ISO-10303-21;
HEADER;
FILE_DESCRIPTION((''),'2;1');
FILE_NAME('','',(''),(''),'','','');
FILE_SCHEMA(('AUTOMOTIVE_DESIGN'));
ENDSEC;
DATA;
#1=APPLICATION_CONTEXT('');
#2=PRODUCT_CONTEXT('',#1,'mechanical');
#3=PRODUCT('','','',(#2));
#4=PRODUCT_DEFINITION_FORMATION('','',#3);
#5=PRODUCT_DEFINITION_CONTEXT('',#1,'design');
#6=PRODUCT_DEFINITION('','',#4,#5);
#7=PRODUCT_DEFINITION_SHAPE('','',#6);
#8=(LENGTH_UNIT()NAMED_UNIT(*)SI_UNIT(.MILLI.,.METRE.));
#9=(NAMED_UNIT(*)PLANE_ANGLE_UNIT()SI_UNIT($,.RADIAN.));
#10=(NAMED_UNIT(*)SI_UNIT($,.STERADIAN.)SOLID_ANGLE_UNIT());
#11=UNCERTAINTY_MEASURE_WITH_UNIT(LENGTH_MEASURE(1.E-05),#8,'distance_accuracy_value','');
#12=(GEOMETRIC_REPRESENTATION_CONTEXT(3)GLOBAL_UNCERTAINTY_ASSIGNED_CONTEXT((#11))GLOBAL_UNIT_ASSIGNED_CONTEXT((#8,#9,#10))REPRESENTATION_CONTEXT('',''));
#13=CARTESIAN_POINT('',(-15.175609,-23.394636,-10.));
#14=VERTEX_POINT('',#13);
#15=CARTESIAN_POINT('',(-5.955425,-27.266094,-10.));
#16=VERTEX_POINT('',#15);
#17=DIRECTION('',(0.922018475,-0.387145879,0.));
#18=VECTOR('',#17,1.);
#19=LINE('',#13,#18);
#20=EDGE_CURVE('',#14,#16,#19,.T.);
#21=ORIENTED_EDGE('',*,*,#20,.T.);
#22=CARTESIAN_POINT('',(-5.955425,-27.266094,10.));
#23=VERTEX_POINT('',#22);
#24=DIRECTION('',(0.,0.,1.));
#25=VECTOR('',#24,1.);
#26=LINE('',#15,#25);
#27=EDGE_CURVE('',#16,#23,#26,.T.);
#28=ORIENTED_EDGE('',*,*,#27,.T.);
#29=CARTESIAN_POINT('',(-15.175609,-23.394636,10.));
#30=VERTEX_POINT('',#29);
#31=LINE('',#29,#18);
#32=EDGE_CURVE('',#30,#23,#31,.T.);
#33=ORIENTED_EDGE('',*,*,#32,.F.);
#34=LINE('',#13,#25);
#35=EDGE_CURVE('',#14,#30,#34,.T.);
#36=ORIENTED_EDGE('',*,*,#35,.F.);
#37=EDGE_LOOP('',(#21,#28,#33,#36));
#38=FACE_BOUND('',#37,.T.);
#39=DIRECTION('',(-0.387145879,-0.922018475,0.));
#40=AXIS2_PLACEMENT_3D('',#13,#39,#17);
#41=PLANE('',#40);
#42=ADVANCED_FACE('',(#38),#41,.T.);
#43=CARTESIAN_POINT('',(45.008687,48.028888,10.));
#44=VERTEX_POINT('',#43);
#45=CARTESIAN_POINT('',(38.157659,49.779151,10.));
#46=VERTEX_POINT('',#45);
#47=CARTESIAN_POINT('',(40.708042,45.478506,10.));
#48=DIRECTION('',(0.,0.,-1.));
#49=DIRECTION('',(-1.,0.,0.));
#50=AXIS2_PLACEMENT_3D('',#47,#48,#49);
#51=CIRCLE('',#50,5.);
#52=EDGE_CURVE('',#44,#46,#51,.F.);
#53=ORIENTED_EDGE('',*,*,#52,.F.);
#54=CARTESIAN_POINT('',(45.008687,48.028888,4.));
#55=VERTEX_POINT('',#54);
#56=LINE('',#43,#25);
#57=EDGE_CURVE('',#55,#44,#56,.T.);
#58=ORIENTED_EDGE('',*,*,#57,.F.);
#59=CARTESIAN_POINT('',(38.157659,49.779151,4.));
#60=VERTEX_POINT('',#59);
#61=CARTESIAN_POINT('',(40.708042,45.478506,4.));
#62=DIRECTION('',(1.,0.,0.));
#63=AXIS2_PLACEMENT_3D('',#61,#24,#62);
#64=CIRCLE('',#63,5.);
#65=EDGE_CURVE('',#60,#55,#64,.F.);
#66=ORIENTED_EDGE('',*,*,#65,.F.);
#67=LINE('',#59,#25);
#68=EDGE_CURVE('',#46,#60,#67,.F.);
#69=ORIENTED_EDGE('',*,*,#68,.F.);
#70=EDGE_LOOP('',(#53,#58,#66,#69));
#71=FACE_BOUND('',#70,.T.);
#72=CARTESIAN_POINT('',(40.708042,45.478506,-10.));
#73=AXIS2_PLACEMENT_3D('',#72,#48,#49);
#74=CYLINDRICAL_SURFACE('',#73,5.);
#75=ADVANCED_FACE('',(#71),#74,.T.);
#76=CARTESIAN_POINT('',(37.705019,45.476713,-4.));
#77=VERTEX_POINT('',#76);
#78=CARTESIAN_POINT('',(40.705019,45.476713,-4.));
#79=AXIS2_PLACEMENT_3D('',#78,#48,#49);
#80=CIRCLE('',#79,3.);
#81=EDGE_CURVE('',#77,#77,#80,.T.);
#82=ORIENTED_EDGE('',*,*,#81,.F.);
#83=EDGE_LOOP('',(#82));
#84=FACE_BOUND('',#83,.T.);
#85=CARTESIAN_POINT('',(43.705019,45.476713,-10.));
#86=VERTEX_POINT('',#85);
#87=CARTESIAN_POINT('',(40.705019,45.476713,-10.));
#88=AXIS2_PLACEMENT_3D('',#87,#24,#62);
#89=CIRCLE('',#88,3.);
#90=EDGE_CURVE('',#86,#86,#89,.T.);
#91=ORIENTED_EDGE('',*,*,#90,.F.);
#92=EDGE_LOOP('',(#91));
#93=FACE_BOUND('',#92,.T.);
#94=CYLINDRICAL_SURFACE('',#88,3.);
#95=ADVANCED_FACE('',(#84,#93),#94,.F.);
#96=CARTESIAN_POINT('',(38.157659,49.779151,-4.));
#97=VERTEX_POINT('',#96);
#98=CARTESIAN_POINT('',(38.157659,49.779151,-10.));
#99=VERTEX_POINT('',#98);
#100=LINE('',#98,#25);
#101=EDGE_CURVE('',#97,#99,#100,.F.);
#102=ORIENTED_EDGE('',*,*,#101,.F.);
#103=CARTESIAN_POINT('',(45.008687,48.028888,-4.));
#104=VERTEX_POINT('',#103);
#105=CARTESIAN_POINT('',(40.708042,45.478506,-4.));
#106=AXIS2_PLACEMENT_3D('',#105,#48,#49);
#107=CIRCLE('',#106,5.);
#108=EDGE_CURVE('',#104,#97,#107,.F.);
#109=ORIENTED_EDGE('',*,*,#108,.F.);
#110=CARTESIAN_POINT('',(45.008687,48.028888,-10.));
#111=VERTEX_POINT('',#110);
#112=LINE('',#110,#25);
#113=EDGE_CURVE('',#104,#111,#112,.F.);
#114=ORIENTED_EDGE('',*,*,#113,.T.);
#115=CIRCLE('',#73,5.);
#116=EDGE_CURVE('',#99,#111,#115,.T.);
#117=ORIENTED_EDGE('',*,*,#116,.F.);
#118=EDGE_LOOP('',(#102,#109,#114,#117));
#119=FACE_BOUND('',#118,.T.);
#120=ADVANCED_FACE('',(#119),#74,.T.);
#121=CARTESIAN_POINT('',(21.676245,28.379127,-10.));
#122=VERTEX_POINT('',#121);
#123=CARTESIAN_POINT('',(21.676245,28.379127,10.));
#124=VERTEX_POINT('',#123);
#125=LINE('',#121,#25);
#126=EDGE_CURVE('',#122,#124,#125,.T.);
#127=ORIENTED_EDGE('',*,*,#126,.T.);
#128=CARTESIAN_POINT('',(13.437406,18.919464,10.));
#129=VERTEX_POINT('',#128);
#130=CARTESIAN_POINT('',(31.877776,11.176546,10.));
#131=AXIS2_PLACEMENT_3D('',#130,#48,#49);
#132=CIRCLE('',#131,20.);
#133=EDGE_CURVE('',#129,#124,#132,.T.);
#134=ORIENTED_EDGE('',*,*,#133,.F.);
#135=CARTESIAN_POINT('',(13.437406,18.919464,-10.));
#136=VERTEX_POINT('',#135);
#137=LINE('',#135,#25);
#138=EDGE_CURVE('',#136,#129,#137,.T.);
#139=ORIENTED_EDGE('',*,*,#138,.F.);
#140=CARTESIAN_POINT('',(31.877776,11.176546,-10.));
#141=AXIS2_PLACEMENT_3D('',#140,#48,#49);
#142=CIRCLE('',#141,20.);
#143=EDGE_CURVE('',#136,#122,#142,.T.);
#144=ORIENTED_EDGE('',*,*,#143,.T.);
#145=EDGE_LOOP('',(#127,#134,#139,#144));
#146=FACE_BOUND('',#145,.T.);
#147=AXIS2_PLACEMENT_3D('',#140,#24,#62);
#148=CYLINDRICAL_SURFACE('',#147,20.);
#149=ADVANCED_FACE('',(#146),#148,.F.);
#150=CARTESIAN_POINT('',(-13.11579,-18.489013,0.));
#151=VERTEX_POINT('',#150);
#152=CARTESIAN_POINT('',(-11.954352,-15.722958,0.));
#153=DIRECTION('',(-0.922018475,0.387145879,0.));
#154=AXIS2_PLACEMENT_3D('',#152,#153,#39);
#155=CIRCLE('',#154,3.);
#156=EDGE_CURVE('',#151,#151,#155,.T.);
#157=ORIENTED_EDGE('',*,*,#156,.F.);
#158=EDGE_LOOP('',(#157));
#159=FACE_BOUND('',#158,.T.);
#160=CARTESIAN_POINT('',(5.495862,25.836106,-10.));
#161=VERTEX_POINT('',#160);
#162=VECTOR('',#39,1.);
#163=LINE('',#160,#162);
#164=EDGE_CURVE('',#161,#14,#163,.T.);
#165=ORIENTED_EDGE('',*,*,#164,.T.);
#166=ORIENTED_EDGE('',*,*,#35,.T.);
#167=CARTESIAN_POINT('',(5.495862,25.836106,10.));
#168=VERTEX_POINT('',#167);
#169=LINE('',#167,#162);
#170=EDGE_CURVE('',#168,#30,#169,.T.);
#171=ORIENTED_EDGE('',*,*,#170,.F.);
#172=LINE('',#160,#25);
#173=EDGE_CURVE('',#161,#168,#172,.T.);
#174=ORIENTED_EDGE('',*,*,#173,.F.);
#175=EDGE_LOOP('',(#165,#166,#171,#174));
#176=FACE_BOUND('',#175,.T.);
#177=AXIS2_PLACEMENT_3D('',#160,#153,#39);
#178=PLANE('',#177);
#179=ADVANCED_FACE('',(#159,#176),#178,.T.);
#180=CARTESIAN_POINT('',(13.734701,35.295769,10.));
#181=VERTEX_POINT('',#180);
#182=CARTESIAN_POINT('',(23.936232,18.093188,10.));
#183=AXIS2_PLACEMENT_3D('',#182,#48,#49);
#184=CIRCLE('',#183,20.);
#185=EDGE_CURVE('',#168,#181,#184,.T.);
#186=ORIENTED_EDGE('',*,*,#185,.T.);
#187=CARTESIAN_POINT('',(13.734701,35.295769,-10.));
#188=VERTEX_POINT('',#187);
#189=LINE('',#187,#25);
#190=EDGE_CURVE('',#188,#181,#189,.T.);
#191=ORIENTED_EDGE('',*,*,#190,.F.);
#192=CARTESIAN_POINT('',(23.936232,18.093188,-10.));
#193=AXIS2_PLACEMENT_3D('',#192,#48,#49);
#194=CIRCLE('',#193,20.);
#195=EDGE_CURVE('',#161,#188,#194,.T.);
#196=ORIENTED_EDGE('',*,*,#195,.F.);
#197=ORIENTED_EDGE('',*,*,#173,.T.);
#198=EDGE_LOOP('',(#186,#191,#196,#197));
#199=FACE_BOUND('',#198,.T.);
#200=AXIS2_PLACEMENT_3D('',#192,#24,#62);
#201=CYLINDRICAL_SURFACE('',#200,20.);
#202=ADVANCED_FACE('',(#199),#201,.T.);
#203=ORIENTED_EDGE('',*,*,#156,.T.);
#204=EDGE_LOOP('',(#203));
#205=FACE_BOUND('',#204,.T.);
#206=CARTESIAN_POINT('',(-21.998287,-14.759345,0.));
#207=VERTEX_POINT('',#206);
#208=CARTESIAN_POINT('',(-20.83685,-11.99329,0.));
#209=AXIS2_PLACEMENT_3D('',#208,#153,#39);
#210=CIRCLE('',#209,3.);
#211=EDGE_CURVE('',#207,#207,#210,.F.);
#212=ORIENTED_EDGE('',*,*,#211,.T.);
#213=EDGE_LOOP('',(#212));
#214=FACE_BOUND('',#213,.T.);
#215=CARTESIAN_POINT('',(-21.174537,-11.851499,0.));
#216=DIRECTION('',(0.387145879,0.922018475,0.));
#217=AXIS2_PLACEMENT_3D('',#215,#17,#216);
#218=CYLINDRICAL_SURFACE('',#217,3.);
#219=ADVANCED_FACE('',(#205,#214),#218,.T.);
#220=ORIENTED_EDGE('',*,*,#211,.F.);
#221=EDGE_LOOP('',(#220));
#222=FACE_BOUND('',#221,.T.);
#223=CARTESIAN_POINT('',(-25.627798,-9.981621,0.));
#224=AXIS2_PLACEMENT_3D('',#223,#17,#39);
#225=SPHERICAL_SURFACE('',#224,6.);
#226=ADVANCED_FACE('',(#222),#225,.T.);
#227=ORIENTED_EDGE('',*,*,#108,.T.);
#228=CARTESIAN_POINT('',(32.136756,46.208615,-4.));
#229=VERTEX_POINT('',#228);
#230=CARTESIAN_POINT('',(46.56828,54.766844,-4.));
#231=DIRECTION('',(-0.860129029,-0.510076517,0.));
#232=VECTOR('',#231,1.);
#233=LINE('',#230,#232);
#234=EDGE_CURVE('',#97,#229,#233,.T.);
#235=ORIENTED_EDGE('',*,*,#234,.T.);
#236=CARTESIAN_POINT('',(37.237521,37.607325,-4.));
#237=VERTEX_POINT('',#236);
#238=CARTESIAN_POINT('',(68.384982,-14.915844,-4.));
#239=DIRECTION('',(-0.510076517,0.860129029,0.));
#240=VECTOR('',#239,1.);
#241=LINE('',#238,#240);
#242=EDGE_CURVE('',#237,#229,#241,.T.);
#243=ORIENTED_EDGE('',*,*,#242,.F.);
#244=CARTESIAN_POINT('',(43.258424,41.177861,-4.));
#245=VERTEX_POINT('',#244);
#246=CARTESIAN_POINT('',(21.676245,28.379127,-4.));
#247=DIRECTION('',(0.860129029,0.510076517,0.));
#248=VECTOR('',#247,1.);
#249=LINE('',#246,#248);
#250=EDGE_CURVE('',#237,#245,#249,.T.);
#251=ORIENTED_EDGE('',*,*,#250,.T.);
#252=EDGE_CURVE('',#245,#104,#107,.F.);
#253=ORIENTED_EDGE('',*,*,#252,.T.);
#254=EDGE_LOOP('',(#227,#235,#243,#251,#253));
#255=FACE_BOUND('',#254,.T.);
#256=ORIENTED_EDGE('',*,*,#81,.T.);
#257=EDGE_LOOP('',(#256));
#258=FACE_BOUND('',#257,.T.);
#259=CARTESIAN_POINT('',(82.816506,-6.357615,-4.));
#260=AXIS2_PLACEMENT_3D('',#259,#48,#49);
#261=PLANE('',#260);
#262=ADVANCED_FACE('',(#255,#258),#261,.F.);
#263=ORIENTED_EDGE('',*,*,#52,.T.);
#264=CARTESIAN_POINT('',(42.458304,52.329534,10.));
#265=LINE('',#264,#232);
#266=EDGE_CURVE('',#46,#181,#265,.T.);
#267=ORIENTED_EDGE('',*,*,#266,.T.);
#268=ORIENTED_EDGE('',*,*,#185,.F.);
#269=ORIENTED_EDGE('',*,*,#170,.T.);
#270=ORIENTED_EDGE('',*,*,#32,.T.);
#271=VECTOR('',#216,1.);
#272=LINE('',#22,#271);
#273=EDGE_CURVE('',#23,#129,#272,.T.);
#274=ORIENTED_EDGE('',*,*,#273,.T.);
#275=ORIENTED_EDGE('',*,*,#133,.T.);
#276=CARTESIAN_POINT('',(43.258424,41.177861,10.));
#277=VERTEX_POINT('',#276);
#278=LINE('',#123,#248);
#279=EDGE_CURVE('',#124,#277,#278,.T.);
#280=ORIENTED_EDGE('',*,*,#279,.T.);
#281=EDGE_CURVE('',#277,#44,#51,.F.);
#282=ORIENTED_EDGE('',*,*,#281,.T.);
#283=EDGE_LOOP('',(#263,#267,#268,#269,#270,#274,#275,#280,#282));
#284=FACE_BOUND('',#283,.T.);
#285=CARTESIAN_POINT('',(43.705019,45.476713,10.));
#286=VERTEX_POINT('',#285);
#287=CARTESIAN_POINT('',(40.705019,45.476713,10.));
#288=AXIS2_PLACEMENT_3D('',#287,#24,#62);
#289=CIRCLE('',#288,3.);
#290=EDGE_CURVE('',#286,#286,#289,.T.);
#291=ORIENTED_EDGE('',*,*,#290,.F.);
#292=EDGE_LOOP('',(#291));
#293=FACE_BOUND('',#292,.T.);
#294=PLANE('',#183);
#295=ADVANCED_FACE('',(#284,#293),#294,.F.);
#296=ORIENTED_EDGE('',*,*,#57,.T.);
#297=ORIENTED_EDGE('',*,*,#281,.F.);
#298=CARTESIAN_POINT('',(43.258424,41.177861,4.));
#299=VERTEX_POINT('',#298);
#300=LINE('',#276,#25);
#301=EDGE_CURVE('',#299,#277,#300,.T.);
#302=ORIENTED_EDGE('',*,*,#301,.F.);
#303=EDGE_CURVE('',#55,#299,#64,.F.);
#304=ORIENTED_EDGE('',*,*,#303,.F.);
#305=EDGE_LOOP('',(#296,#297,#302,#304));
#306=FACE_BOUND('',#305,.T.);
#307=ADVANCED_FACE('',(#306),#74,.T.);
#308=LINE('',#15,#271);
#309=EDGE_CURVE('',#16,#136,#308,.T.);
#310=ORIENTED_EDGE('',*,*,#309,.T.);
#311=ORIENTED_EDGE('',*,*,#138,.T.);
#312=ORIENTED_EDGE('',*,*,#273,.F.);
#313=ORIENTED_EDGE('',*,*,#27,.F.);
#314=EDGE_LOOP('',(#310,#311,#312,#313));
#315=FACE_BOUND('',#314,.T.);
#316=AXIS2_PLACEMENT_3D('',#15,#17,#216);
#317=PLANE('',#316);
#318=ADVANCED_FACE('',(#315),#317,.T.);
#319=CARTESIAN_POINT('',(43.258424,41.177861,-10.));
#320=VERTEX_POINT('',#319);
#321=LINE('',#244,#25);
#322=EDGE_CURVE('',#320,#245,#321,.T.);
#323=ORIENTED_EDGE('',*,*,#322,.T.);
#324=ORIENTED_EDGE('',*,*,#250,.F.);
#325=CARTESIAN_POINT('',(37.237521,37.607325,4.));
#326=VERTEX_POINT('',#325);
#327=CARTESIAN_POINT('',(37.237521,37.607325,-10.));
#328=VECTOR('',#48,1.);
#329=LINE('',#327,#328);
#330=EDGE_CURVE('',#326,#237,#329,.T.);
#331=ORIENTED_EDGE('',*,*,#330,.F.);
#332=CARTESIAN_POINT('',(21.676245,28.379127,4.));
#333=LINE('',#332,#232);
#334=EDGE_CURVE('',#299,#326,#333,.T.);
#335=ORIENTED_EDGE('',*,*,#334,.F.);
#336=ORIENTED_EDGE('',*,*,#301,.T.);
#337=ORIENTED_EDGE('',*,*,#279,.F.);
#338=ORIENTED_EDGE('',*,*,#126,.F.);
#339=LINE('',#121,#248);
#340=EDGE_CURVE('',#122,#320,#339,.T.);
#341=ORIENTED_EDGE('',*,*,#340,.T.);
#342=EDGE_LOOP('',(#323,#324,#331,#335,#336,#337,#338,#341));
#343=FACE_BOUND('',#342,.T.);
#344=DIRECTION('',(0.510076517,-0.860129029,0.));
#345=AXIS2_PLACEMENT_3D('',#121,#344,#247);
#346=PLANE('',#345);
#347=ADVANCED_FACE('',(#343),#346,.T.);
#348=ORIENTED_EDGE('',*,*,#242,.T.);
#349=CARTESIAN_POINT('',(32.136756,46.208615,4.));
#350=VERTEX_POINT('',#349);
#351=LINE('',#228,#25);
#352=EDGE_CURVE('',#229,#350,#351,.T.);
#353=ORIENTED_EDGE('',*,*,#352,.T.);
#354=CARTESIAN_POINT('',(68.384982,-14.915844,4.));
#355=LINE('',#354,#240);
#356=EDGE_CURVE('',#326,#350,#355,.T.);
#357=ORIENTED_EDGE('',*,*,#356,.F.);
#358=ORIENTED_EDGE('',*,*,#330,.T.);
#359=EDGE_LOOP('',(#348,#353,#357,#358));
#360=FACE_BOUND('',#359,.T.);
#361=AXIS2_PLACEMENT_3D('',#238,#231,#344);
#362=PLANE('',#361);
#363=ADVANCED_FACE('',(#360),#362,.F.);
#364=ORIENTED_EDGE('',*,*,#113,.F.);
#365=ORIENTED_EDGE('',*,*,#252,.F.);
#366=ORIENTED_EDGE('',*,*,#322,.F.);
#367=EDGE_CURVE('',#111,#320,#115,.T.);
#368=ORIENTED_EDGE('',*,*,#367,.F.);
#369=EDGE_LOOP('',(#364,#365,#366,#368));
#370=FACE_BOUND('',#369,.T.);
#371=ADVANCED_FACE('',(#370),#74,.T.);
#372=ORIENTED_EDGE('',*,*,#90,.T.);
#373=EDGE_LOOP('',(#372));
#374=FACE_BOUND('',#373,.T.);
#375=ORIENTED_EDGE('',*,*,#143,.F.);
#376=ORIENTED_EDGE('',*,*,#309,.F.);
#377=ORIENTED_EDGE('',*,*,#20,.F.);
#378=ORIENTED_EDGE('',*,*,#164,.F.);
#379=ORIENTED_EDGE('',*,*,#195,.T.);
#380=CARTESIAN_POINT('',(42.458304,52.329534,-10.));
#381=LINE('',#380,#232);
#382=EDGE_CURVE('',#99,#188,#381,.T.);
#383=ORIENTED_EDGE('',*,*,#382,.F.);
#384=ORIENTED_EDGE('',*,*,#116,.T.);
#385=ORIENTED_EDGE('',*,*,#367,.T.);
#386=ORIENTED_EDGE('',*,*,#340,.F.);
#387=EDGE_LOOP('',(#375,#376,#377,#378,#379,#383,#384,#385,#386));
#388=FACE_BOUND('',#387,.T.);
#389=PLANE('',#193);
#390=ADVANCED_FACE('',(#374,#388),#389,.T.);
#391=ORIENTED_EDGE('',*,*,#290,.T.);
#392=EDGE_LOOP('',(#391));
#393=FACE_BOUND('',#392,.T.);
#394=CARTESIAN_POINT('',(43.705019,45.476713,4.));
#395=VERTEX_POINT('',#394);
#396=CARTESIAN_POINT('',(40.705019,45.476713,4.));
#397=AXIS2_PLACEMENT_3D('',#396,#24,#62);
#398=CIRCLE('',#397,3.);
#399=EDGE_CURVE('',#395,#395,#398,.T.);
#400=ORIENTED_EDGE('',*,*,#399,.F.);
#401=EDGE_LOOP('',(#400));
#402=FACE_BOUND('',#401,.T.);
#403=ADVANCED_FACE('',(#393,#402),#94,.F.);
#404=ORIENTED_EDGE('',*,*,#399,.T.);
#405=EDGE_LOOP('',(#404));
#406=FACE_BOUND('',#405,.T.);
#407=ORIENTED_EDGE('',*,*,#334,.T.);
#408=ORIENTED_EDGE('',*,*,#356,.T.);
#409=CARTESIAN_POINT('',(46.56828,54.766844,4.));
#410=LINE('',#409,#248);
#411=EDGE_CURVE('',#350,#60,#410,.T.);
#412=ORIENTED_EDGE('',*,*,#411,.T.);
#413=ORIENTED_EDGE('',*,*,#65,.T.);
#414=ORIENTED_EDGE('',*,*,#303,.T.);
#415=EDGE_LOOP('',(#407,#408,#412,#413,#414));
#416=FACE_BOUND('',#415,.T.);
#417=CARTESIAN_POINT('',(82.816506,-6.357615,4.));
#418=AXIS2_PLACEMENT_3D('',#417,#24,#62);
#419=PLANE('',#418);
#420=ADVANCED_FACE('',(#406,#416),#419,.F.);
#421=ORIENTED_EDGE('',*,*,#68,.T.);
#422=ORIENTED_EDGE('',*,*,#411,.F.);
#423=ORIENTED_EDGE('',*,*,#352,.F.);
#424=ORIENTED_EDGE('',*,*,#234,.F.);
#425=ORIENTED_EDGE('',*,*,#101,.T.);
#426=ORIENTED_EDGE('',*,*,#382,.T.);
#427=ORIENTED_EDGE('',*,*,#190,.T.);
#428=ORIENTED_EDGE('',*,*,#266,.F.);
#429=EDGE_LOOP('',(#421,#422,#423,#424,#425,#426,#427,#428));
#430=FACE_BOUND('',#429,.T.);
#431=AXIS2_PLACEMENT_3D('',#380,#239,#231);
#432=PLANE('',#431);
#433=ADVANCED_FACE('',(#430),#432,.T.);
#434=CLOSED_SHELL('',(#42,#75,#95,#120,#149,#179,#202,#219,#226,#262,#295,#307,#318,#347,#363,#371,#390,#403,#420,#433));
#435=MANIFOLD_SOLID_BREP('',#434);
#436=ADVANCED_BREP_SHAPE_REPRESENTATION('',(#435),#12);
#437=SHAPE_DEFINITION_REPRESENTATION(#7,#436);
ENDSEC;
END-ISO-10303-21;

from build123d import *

# Parameters (mm, degrees)
BOSS_EXTRU_1_DEPTH      = 10
BOSS_EXTRU_1_DEPTH_BACK = 10
ESQUISSE2_W             = 16.778324123
ESQUISSE2_H             = 8
ENL_V_MAT_EXTRU_2_DEPTH = 77.675205123
ESQUISSE3_R             = 3
ENL_V_MAT_EXTRU_3_DEPTH = 74.486360502
ESQUISSE4_R             = 3
BOSS_EXTRU_2_DEPTH      = 10
CONG_2_R                = 5


with BuildPart() as part:
    # Esquisse1 → Boss.-Extru.1 (new, two sides: drawn at the far end of the back side and taken through both)
    with BuildSketch(Plane.XY.offset(-BOSS_EXTRU_1_DEPTH_BACK)):
        with BuildLine():
            Line((42.458304448, 52.329533504), (13.73470128, 35.295768835))
            ThreePointArc((13.73470128, 35.295768835), (8.854424282, 31.228601734), (5.495862123, 25.836105835))
            Line((5.495862123, 25.836105835), (-15.175609455, -23.394635688))
            Line((-15.175609455, -23.394635688), (-5.955424705, -27.266094479))
            Line((-5.955424705, -27.266094479), (13.437406292, 18.919463554))
            ThreePointArc((13.437406292, 18.919463554), (16.795968451, 24.311959453), (21.676245449, 28.379126554))
            Line((21.676245449, 28.379126554), (47.55906962, 43.728243213))
            Line((47.55906962, 43.728243213), (42.458304448, 52.329533504))
        make_face()
    extrude(amount=BOSS_EXTRU_1_DEPTH + BOSS_EXTRU_1_DEPTH_BACK)

    # Esquisse2 → Enlèv. mat.-Extru.2 (cut, through all)
    with BuildSketch(Plane(origin=(-11.911901978, 20.08673667, 0), x_dir=(0.8601290290322577, 0.5100765172168049, 0), z_dir=(-0.5100765172168049, 0.8601290290322577, 0))):
        with Locations((59.600848438, 0)):
            Rectangle(ESQUISSE2_W, ESQUISSE2_H)
    extrude(amount=-ENL_V_MAT_EXTRU_2_DEPTH, mode=Mode.SUBTRACT)

    # Esquisse3 → Enlèv. mat.-Extru.3 (cut, through all)
    with BuildSketch(Plane.XY.offset(10)):
        with Locations((40.705018812, 45.476713018)):
            Circle(ESQUISSE3_R)
    extrude(amount=-ENL_V_MAT_EXTRU_3_DEPTH, mode=Mode.SUBTRACT)

    # Esquisse4 → Boss.-Extru.2 (add)
    with BuildSketch(Plane(origin=(-4.550212337, 1.910586396, 0), x_dir=(0, 0, 1), z_dir=(-0.9220184750588774, 0.38714587903024655, 0))):
        with Locations(Location((0, -19.124935546, 0), (0, 0, 270))):
            Circle(ESQUISSE4_R)
    extrude(amount=BOSS_EXTRU_2_DEPTH)

    # Esquisse5 → Révolution1 (revolve)
    with BuildSketch(Plane.XY):
        with BuildLine():
            Line((-20.095687486, -12.304496338), (-31.159909187, -7.658745789))
            ThreePointArc((-31.159909187, -7.658745789), (-23.304923062, -4.449510213), (-20.095687486, -12.304496338))
        make_face()
    revolve(axis=Axis((-21.174537071, -11.851498722, 0), (-0.9220184750588776, 0.3871458790302464, 0)))

    # Congé2
    cong_2_edges = [part.edges().sort_by_distance(p)[0] for p in [
        (47.55906962, 43.728243213, 7),
        (42.458304448, 52.329533504, 7),
        (42.458304448, 52.329533504, -7),
        (47.55906962, 43.728243213, -7),
    ]]
    fillet(cong_2_edges, radius=CONG_2_R - 0.0001)  # a hair under: the kernel refuses the full size


solid = part.part
